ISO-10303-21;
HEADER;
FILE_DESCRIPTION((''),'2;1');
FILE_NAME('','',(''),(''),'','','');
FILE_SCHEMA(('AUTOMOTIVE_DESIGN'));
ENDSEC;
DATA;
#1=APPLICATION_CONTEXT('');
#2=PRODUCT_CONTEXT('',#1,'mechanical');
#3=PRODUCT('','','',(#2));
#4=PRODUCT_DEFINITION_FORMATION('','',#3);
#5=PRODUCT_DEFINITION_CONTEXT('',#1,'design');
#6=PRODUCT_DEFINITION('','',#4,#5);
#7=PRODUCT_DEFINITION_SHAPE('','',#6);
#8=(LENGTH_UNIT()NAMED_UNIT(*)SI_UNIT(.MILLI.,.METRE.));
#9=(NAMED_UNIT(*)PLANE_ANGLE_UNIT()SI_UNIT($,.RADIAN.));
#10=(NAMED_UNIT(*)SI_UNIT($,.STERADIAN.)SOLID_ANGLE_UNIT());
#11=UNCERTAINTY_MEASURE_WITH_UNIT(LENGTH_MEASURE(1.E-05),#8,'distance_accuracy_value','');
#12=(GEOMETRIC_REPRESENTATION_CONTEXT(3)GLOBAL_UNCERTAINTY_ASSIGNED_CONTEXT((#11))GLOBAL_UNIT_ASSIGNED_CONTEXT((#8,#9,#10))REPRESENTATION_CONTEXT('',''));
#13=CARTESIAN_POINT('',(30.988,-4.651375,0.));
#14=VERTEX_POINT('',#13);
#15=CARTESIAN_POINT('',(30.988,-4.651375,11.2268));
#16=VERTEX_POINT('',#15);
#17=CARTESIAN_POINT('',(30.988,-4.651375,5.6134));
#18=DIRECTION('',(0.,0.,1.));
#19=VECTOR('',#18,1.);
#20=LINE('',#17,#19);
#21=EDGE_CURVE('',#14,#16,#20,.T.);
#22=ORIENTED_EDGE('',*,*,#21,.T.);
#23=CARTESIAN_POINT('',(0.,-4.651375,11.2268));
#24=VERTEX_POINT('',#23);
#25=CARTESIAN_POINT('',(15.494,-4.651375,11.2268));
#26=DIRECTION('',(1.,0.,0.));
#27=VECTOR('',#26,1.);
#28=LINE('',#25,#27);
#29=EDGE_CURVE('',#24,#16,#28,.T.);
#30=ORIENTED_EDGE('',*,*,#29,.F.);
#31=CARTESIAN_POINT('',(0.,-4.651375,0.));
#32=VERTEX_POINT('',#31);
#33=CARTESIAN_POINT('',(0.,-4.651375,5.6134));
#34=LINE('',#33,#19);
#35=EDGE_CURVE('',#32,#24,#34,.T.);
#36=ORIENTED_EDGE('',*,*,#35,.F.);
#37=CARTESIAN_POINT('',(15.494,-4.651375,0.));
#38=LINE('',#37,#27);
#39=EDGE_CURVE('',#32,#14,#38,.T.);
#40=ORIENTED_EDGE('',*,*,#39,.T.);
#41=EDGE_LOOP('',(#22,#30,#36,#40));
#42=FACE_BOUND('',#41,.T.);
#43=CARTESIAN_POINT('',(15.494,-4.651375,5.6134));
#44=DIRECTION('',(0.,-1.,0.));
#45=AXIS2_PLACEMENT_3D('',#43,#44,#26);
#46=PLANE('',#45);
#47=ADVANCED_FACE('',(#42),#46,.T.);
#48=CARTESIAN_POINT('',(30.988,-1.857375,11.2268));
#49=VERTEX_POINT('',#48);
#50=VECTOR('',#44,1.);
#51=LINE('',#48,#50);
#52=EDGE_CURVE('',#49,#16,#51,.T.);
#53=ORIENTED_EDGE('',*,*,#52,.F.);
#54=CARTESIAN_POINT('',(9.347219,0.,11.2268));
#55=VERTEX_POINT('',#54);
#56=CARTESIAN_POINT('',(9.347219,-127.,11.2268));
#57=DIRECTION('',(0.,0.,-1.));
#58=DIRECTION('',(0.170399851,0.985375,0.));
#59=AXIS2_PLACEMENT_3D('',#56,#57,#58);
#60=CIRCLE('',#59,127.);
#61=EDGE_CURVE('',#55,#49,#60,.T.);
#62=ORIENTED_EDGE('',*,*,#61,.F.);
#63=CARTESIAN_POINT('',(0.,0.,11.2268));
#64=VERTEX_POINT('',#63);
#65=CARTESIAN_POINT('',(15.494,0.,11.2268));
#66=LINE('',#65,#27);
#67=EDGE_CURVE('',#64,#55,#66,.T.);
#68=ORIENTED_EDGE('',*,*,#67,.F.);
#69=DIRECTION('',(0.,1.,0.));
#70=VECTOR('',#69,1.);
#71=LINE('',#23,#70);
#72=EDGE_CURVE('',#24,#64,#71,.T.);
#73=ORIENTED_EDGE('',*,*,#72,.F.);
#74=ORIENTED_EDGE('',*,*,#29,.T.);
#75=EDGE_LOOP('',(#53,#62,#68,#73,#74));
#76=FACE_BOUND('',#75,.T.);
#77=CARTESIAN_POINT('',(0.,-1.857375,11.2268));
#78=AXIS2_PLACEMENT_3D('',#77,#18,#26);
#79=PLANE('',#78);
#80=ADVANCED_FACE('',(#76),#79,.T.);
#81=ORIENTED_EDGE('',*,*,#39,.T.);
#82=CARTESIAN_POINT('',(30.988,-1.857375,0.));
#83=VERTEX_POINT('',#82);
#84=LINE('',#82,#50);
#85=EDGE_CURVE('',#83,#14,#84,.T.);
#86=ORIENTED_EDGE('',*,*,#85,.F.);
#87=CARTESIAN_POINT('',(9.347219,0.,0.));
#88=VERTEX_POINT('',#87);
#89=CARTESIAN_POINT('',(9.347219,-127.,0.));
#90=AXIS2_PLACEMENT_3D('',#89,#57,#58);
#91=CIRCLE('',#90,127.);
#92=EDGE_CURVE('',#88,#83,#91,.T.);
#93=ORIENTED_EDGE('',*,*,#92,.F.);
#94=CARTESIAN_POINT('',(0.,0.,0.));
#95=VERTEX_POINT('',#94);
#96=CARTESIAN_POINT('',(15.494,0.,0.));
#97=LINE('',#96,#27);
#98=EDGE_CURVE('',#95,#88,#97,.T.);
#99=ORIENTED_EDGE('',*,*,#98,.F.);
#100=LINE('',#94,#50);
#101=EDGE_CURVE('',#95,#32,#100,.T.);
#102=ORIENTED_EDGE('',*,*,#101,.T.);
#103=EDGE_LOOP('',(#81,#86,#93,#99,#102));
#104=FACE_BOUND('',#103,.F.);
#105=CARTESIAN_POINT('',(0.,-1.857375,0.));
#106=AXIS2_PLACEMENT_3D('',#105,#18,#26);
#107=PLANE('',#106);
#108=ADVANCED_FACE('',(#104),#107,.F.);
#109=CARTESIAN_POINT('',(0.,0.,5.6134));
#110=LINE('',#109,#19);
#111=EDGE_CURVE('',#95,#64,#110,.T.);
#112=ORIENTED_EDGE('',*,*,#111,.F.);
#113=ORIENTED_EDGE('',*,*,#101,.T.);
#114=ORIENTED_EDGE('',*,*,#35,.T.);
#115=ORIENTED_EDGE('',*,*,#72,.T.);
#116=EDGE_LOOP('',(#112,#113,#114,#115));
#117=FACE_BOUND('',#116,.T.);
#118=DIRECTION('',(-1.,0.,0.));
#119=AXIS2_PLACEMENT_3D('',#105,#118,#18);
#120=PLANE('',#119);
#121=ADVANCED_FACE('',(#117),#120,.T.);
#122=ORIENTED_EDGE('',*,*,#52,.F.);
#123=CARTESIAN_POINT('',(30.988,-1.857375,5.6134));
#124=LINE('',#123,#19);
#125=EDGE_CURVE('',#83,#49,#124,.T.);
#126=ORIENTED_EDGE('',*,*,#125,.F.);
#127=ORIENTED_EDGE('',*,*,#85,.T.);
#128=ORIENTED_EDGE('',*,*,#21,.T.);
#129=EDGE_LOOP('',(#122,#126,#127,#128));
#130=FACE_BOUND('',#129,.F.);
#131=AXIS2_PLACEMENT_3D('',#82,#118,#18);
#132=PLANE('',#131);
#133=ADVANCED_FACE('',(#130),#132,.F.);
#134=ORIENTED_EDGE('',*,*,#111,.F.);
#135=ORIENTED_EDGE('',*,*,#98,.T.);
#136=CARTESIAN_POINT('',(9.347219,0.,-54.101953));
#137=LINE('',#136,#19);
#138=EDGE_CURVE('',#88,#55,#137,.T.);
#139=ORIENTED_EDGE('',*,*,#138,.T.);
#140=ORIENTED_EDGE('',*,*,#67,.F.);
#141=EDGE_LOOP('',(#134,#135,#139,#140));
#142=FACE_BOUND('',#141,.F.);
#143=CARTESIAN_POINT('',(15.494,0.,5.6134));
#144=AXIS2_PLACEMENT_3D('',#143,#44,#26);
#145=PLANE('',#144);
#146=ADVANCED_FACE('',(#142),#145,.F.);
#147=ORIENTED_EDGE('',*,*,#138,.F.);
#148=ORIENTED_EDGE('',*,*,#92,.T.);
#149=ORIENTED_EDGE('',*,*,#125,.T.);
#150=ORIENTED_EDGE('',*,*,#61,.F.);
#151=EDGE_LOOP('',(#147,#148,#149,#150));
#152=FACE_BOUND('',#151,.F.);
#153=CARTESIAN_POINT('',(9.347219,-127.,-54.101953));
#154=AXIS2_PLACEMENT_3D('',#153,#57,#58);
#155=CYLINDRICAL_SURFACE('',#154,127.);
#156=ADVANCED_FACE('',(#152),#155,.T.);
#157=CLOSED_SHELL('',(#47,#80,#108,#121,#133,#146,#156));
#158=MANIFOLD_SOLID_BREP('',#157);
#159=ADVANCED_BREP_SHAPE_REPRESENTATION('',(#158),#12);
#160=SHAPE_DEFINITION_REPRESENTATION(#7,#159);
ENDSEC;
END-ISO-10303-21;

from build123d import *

# Parameters (mm, degrees)
F0_W        = 30.988
F0_H        = 11.2268
F1_DEPTH    = 1.857375
F3_T1_DEPTH = 119.4307056724
F2_W        = 30.988
F2_H        = 11.2268
F4_DEPTH    = 2.794


# Not quite as in the source:
# - a fillet or chamfer that OpenCascade refuses, or shapes differently, is made with other operations: its cross-section is extruded or revolved along the edge and cut away or added


with BuildPart() as f1:
    # F0 (on Front) → F1 (new body)
    with BuildSketch(Plane.XZ):
        with Locations((15.494, 5.6134)):
            Rectangle(F0_W, F0_H)
    extrude(amount=F1_DEPTH)

    # F3: fillet of radius 127 on 1 edges, made by hand

    # F3_s2 → F3_t1 (cut)
    with BuildSketch(Plane.XY.offset(-54.1019528362)):
        with BuildLine():
            ThreePointArc((30.988, -1.857375), (20.2073897896, -0.4651957464), (9.3472188655, 0))
            Line((9.3472188655, 0), (30.988, 0))
            Line((30.988, 0), (30.988, -1.857375))
        make_face()
    extrude(amount=F3_T1_DEPTH, mode=Mode.SUBTRACT)

    # F2 (on face) → F4 (join)
    with BuildSketch(Plane.XZ.offset(1.857375)):
        with Locations((15.494, 5.6134)):
            Rectangle(F2_W, F2_H)
    extrude(amount=F4_DEPTH)


solid = f1.part
